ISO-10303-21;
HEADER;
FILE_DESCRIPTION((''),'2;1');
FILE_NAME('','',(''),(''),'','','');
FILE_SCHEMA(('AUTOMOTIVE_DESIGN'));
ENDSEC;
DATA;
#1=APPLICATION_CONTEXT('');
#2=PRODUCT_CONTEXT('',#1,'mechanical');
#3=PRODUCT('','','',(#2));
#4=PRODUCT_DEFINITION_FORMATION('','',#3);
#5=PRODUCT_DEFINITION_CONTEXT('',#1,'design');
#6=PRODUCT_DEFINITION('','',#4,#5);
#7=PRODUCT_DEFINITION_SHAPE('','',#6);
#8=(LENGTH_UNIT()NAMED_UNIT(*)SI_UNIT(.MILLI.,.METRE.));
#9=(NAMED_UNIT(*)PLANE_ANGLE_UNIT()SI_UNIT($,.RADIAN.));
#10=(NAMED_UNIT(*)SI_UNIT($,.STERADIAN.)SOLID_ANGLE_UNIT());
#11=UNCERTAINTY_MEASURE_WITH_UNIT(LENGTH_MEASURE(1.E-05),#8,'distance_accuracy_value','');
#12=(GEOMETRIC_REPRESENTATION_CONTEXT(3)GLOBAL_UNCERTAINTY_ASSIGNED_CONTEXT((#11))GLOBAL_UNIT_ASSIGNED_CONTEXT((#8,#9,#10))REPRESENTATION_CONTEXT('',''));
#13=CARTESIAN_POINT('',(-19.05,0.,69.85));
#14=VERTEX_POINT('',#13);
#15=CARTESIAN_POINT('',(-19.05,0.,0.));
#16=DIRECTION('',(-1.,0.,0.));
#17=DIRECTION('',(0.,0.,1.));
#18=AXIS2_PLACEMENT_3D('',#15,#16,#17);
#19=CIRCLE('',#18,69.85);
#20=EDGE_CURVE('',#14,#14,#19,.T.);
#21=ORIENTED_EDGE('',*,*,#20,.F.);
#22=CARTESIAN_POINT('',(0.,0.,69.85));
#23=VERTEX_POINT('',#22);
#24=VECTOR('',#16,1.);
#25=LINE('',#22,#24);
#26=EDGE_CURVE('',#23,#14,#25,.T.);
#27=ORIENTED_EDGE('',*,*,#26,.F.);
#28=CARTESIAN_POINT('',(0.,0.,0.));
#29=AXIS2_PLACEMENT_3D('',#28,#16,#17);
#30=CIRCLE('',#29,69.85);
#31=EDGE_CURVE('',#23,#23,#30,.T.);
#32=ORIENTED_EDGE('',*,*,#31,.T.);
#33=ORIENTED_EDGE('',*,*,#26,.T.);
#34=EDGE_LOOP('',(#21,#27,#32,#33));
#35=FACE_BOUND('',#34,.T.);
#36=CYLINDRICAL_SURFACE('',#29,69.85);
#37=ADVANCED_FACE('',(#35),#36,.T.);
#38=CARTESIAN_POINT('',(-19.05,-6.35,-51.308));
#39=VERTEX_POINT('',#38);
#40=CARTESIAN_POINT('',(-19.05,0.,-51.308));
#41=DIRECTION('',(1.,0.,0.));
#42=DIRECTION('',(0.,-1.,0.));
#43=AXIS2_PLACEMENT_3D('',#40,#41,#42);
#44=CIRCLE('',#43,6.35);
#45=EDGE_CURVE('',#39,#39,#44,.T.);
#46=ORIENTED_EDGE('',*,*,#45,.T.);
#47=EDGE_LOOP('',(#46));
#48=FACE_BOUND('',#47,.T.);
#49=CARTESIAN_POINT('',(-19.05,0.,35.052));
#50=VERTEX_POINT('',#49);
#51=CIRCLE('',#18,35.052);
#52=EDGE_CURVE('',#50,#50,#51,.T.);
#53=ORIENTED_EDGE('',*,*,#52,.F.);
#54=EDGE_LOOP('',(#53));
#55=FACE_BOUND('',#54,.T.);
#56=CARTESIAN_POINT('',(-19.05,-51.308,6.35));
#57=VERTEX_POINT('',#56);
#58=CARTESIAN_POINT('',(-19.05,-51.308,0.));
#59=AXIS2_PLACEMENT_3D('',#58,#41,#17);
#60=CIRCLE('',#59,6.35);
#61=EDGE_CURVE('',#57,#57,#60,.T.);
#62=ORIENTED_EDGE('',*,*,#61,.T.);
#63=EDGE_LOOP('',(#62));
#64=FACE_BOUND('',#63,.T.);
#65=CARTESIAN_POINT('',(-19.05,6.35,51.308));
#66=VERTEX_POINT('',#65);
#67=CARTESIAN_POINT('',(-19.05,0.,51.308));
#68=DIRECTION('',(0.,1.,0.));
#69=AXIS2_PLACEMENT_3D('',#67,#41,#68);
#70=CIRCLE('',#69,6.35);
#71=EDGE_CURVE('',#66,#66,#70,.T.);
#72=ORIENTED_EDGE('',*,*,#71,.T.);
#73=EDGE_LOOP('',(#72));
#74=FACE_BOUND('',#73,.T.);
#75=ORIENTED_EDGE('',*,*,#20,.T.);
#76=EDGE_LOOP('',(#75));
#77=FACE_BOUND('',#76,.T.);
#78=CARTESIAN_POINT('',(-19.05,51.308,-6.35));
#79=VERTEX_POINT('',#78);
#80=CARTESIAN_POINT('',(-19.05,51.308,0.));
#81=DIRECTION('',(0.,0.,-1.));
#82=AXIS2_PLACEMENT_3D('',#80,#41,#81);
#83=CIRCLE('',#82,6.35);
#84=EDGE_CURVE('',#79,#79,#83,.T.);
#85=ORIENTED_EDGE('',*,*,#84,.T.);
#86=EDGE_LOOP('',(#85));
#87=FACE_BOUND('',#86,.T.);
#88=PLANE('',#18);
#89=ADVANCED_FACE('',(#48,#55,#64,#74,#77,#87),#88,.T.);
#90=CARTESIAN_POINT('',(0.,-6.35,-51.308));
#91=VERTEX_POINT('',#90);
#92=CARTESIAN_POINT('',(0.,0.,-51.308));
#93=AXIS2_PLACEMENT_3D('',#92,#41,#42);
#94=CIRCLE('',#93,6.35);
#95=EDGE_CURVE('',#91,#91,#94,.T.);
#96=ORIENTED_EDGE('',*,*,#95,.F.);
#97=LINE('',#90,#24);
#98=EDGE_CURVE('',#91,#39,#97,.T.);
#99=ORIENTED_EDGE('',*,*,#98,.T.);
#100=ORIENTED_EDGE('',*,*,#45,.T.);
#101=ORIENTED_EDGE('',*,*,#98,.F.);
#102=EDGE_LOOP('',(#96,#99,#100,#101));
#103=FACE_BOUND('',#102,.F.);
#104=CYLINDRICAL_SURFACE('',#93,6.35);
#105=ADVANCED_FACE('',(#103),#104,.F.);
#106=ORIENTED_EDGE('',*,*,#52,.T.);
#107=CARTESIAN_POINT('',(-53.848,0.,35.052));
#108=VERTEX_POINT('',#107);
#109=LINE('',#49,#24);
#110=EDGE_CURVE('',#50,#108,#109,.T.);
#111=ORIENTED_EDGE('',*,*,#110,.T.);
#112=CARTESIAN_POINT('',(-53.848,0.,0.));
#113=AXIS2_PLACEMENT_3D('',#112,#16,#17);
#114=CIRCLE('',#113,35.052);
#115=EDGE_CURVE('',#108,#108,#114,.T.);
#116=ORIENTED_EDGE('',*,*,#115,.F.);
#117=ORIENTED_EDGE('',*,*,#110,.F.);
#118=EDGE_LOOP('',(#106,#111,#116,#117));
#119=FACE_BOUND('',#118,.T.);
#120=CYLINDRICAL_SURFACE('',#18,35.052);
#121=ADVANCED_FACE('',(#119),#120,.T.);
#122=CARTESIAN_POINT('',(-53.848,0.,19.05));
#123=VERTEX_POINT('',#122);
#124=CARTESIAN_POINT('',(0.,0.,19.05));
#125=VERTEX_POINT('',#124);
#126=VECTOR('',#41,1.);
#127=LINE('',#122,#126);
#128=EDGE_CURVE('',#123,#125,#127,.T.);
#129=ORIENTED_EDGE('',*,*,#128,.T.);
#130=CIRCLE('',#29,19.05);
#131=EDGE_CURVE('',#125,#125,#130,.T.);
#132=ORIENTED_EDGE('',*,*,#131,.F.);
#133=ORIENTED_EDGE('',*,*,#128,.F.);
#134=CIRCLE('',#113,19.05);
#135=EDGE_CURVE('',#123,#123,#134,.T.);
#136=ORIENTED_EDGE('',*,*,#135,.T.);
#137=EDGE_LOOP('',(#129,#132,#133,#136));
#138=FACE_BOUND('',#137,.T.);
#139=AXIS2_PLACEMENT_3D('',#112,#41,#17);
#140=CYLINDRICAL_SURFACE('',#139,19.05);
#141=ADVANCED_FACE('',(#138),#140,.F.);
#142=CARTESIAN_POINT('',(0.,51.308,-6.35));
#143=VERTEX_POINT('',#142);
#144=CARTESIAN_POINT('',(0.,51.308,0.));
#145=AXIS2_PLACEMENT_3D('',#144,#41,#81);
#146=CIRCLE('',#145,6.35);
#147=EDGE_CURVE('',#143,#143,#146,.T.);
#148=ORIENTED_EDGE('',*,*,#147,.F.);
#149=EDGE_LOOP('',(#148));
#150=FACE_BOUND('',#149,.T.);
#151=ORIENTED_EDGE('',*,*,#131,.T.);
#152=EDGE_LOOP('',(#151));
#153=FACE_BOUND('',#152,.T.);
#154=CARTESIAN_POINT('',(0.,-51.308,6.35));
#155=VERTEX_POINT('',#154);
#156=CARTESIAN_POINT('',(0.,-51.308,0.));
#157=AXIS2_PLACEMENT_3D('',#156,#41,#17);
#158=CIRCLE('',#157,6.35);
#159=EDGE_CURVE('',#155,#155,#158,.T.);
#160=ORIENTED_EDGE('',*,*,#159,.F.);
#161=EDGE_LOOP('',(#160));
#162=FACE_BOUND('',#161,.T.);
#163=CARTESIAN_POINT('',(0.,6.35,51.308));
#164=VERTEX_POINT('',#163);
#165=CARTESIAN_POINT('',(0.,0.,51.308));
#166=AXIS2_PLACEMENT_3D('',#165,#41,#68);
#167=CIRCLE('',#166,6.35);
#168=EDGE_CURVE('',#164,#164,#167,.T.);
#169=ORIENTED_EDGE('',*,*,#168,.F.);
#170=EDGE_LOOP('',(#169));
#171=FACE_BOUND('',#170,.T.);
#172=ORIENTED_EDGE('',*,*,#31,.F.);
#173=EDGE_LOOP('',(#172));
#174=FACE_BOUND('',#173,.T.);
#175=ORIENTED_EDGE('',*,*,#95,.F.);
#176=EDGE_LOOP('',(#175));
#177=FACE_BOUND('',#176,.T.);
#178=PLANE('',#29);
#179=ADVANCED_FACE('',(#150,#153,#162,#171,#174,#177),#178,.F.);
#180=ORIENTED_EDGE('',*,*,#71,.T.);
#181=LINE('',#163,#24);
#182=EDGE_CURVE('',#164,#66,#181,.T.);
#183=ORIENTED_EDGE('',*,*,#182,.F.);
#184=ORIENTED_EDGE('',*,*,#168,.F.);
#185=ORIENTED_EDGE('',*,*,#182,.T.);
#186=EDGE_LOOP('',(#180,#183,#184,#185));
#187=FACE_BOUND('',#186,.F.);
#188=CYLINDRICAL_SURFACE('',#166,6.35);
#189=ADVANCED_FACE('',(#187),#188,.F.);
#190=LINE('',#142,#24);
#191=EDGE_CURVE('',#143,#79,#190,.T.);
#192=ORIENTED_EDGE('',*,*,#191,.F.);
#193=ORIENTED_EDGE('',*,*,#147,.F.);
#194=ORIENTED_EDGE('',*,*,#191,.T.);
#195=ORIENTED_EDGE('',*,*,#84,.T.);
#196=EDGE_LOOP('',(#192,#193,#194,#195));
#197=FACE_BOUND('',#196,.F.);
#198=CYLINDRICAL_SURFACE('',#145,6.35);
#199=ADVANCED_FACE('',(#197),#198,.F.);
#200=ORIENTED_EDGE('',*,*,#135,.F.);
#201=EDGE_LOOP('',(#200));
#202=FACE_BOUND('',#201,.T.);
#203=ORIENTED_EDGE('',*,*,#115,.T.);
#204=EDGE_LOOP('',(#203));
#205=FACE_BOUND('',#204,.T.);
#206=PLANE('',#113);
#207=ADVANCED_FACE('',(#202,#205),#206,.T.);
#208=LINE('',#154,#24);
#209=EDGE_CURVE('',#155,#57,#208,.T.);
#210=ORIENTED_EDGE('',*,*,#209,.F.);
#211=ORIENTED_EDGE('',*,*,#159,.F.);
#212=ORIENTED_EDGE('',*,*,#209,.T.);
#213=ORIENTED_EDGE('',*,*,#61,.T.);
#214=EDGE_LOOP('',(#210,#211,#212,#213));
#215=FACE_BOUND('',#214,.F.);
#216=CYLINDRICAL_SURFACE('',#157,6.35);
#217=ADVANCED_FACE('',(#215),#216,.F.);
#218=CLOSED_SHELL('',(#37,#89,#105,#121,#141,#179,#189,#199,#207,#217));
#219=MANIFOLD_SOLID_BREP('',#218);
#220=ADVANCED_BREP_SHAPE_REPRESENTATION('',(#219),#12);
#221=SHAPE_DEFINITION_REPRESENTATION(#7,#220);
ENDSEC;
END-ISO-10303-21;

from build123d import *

# Parameters (mm, degrees)
F2_R            = 6.35
F3_DEPTH        = 25.4
F3_COPIES_COUNT = 4


# Not quite as in the source:
# - a pattern or mirror of a feature is missing from the dataset's text; its kind, count and spacing are read off the source's solid


with BuildPart() as f1:
    # F0 (on Front) → F1 (revolve)
    with BuildSketch(Plane.XZ):
        Polygon((-53.848, 19.05), (0, 19.05), (0, 69.85), (-19.05, 69.85), (-19.05, 35.052), (-53.848, 35.052), align=None)
    revolve(axis=Axis((-30.7231917977, 0, 0), (-1, 0, 0)))

    # F2 (on Right) → F3 (cut)
    with BuildSketch(Plane.YZ):
        with Locations((0, 51.308)):
            Circle(F2_R)
    f3 = extrude(amount=-F3_DEPTH, mode=Mode.SUBTRACT)

    # F3_copies: F3 ×4 about axis
    f3_copies_axis = Axis((0, 0, 0), (1, 0, 0))
    for i in range(1, F3_COPIES_COUNT):
        add(f3.rotate(f3_copies_axis, i * 360 / F3_COPIES_COUNT), mode=Mode.SUBTRACT)


solid = f1.part
